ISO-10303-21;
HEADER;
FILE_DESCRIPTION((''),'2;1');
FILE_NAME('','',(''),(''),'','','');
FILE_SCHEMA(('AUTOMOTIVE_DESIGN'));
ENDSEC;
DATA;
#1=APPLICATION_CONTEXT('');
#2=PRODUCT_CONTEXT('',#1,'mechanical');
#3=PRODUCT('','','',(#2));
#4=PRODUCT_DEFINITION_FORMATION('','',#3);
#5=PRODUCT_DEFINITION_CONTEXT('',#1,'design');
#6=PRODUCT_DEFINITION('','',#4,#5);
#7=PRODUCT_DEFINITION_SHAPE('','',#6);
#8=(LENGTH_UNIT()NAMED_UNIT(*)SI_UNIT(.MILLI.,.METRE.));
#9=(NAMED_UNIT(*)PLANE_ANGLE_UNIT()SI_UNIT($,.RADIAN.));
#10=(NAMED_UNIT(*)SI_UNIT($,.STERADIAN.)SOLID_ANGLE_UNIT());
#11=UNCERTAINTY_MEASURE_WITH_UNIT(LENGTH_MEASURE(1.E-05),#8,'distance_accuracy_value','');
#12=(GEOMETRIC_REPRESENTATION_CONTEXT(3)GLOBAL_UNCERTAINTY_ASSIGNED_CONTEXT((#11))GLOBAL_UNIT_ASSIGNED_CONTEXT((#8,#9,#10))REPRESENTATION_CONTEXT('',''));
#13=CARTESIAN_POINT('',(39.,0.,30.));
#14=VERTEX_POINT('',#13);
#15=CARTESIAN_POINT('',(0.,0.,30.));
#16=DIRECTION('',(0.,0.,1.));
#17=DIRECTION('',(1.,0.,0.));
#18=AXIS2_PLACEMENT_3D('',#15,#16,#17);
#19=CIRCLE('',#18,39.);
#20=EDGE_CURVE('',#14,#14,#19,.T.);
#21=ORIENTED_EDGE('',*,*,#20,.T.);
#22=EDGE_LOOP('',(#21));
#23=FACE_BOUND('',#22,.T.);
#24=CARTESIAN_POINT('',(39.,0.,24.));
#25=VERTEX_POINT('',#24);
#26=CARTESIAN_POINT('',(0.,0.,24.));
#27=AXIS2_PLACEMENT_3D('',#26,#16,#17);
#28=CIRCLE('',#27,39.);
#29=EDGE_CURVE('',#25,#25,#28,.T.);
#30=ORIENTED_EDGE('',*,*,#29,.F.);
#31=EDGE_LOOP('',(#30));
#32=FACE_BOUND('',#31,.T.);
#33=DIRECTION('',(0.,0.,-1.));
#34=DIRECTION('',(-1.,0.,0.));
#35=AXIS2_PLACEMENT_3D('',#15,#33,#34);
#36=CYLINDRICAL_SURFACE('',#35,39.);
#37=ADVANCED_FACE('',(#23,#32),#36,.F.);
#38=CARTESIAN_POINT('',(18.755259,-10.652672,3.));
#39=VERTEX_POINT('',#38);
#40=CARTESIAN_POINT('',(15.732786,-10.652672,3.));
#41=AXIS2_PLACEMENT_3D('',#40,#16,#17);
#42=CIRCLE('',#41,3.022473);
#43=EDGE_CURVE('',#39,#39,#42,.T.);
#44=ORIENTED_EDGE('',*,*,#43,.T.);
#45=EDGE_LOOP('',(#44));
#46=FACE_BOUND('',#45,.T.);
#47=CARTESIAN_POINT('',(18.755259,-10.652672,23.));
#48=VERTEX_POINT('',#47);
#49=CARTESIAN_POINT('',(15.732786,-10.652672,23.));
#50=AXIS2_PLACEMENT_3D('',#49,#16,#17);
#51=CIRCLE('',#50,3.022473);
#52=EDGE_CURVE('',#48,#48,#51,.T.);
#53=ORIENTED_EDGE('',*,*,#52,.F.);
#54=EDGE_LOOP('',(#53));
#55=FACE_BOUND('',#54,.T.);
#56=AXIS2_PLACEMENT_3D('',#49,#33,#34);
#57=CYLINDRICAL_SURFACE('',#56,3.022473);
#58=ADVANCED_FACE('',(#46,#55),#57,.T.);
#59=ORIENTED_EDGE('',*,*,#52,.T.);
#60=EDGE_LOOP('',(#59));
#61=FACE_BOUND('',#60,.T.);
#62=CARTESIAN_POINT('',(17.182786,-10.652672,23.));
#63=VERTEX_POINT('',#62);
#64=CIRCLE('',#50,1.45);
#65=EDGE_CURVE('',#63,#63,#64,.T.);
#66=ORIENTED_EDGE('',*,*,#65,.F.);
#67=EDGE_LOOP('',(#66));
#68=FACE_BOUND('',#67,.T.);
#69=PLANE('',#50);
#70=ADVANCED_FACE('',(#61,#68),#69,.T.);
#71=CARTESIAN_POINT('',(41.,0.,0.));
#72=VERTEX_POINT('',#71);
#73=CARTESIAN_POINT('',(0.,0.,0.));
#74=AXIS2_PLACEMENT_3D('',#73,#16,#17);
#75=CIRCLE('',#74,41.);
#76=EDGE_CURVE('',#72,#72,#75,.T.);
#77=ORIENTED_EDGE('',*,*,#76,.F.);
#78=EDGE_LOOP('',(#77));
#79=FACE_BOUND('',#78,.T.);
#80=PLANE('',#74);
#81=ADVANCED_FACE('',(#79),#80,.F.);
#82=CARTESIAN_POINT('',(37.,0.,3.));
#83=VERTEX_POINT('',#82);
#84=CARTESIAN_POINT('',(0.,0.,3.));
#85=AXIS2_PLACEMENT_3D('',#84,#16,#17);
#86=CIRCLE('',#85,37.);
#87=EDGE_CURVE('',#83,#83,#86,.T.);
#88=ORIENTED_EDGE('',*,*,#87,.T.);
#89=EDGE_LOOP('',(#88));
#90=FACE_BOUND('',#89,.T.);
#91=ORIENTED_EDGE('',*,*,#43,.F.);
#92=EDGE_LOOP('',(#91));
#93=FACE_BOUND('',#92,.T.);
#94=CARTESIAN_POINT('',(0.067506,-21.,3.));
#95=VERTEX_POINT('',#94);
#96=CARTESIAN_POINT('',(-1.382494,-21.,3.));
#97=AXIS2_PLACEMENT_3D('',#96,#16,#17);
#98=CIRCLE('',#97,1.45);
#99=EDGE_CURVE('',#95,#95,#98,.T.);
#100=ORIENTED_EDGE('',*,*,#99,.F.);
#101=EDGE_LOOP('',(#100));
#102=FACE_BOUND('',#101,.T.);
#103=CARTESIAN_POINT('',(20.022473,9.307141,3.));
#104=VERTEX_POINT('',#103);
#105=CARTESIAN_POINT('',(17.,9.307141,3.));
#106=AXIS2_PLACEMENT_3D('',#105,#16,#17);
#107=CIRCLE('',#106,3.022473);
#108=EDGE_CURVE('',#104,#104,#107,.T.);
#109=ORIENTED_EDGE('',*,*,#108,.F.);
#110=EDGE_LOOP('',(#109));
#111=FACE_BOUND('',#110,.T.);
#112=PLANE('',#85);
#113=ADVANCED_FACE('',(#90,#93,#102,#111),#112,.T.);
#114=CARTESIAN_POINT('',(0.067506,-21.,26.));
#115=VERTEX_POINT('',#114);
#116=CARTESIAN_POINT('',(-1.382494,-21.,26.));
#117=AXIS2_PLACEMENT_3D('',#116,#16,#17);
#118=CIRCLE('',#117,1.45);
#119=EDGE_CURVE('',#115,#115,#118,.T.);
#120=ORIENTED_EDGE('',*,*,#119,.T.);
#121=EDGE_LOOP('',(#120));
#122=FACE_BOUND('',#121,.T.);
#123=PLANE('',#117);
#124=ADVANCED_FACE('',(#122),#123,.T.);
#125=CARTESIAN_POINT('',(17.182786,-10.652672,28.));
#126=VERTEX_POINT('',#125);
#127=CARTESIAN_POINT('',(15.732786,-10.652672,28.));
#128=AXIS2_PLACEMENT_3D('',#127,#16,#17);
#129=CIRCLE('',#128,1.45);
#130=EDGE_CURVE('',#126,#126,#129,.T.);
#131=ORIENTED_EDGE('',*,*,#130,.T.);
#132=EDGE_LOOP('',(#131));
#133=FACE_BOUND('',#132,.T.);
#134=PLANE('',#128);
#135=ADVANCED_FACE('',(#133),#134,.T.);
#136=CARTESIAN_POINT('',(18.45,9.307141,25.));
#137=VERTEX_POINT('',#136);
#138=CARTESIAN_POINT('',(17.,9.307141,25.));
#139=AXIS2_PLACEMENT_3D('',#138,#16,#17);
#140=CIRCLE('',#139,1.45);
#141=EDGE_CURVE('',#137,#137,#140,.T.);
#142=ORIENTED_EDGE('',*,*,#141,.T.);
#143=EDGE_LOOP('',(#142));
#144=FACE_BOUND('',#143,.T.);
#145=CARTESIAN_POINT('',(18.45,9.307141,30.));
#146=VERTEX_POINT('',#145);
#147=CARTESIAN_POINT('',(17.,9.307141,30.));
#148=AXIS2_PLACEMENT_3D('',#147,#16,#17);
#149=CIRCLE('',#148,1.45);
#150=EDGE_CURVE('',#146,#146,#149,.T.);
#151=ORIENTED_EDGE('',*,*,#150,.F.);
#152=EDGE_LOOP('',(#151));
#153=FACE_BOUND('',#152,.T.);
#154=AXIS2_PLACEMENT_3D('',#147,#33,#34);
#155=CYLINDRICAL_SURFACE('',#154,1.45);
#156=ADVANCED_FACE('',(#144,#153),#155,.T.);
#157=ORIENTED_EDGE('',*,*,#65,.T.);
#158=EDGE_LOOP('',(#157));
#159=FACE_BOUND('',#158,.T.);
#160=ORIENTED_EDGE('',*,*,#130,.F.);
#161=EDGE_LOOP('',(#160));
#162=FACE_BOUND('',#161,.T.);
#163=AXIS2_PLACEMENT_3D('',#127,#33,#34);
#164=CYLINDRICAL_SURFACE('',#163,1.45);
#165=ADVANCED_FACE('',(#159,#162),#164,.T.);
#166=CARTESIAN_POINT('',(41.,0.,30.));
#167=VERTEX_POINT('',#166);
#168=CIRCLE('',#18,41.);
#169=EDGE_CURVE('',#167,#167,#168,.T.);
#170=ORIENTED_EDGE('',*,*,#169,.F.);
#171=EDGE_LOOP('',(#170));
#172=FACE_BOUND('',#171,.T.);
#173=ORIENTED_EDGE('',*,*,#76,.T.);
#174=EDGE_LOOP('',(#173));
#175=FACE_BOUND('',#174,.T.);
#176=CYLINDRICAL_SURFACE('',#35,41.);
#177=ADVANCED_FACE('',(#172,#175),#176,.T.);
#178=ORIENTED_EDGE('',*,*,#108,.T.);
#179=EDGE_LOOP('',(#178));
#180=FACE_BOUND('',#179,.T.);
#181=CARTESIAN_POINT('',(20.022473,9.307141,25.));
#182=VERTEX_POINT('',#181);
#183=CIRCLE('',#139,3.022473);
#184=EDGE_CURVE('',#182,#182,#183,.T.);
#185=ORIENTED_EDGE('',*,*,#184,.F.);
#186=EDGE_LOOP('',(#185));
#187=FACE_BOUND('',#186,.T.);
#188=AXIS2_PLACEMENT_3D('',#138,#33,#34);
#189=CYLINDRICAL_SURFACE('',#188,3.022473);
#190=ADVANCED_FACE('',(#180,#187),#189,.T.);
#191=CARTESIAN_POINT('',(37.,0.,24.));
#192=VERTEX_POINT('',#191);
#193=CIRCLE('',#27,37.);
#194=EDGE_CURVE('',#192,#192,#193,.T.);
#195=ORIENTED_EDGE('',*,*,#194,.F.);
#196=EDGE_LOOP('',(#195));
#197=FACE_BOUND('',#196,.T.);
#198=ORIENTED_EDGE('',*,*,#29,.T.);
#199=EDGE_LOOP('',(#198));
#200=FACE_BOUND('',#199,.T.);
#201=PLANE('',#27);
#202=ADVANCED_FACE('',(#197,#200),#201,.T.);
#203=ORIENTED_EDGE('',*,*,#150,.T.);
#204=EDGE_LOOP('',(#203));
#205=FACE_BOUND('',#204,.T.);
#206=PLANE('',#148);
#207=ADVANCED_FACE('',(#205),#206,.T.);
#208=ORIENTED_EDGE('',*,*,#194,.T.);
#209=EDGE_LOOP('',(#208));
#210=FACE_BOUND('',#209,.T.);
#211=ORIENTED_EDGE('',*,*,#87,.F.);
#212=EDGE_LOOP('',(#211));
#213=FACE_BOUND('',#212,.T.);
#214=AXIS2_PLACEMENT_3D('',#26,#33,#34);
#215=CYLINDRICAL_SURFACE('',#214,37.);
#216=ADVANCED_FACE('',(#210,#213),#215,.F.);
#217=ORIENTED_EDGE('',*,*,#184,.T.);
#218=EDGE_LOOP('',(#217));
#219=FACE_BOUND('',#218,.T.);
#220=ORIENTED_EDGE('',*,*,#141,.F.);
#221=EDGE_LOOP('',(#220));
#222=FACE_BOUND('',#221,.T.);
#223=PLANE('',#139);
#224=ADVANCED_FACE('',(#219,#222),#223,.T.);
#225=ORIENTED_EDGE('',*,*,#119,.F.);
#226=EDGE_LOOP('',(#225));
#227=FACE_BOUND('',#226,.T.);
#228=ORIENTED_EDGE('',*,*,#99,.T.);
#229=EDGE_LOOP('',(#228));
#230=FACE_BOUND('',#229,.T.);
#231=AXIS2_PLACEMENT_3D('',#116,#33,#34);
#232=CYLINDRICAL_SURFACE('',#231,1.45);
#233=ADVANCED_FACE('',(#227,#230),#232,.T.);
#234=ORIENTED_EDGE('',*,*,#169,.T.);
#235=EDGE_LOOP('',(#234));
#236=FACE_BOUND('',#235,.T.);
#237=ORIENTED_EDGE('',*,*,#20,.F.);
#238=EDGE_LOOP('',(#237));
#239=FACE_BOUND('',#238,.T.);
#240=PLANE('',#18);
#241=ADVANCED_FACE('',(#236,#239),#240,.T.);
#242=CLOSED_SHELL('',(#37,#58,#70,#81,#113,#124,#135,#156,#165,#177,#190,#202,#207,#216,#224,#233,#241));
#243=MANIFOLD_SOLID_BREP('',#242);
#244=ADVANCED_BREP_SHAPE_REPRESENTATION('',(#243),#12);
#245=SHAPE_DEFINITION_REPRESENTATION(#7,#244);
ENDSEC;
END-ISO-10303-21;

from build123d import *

# Parameters (mm, degrees)
SKETCH_1_R      = 41
SKETCH_1_R_2    = 39
EXTRUDE_1_DEPTH = 30
SKETCH_2_R      = 39
SKETCH_2_R_2    = 37
EXTRUDE_2_DEPTH = 24
SKETCH_3D_1_R   = 39
EXTRUDE_3_DEPTH = 3
SKETCH_5_R      = 1.45
EXTRUDE_4_DEPTH = 23
SKETCH_6_R      = 1.45
EXTRUDE_5_DEPTH = 25
SKETCH_7_R      = 3.022472912
EXTRUDE_6_DEPTH = 20
SKETCH_8_R      = 1.45
EXTRUDE_7_DEPTH = 27
SKETCH_9_R      = 3.022472912
EXTRUDE_8_DEPTH = 22


with BuildPart() as part:
    # 草图1 → 凸台-拉伸1 (new body)
    with BuildSketch(Plane.XY):
        Circle(SKETCH_1_R)
        Circle(SKETCH_1_R_2, mode=Mode.SUBTRACT)
    extrude(amount=EXTRUDE_1_DEPTH)

    # 草图2 → 凸台-拉伸2 (add)
    with BuildSketch(Plane.XY):
        Circle(SKETCH_2_R)
        Circle(SKETCH_2_R_2, mode=Mode.SUBTRACT)
    extrude(amount=EXTRUDE_2_DEPTH)

    # Sketch 3D_1 → 凸台-拉伸3 (add)
    with BuildSketch(Plane(origin=(0, 0, 0), x_dir=(-1, 0, 0), z_dir=(0, 0, -1))):
        Circle(SKETCH_3D_1_R)
    extrude(amount=-EXTRUDE_3_DEPTH)

    # 草图5 → 凸台-拉伸4 (add)
    with BuildSketch(Plane.XY.offset(3)):
        with Locations((-1.382493562, -21)):
            Circle(SKETCH_5_R)
    extrude(amount=EXTRUDE_4_DEPTH)

    # 草图6 → 凸台-拉伸5 (add)
    with BuildSketch(Plane.XY.offset(3)):
        with Locations((15.732786494, -10.652672394)):
            Circle(SKETCH_6_R)
    extrude(amount=EXTRUDE_5_DEPTH)

    # 草图7 → 凸台-拉伸6 (add)
    with BuildSketch(Plane.XY.offset(3)):
        with Locations((15.732786494, -10.652672394)):
            Circle(SKETCH_7_R)
    extrude(amount=EXTRUDE_6_DEPTH)

    # 草图8 → 凸台-拉伸7 (add)
    with BuildSketch(Plane.XY.offset(3)):
        with Locations((17, 9.307141481)):
            Circle(SKETCH_8_R)
    extrude(amount=EXTRUDE_7_DEPTH)

    # 草图9 → 凸台-拉伸8 (add)
    with BuildSketch(Plane.XY.offset(3)):
        with Locations((17, 9.307141481)):
            Circle(SKETCH_9_R)
    extrude(amount=EXTRUDE_8_DEPTH)


solid = part.part
